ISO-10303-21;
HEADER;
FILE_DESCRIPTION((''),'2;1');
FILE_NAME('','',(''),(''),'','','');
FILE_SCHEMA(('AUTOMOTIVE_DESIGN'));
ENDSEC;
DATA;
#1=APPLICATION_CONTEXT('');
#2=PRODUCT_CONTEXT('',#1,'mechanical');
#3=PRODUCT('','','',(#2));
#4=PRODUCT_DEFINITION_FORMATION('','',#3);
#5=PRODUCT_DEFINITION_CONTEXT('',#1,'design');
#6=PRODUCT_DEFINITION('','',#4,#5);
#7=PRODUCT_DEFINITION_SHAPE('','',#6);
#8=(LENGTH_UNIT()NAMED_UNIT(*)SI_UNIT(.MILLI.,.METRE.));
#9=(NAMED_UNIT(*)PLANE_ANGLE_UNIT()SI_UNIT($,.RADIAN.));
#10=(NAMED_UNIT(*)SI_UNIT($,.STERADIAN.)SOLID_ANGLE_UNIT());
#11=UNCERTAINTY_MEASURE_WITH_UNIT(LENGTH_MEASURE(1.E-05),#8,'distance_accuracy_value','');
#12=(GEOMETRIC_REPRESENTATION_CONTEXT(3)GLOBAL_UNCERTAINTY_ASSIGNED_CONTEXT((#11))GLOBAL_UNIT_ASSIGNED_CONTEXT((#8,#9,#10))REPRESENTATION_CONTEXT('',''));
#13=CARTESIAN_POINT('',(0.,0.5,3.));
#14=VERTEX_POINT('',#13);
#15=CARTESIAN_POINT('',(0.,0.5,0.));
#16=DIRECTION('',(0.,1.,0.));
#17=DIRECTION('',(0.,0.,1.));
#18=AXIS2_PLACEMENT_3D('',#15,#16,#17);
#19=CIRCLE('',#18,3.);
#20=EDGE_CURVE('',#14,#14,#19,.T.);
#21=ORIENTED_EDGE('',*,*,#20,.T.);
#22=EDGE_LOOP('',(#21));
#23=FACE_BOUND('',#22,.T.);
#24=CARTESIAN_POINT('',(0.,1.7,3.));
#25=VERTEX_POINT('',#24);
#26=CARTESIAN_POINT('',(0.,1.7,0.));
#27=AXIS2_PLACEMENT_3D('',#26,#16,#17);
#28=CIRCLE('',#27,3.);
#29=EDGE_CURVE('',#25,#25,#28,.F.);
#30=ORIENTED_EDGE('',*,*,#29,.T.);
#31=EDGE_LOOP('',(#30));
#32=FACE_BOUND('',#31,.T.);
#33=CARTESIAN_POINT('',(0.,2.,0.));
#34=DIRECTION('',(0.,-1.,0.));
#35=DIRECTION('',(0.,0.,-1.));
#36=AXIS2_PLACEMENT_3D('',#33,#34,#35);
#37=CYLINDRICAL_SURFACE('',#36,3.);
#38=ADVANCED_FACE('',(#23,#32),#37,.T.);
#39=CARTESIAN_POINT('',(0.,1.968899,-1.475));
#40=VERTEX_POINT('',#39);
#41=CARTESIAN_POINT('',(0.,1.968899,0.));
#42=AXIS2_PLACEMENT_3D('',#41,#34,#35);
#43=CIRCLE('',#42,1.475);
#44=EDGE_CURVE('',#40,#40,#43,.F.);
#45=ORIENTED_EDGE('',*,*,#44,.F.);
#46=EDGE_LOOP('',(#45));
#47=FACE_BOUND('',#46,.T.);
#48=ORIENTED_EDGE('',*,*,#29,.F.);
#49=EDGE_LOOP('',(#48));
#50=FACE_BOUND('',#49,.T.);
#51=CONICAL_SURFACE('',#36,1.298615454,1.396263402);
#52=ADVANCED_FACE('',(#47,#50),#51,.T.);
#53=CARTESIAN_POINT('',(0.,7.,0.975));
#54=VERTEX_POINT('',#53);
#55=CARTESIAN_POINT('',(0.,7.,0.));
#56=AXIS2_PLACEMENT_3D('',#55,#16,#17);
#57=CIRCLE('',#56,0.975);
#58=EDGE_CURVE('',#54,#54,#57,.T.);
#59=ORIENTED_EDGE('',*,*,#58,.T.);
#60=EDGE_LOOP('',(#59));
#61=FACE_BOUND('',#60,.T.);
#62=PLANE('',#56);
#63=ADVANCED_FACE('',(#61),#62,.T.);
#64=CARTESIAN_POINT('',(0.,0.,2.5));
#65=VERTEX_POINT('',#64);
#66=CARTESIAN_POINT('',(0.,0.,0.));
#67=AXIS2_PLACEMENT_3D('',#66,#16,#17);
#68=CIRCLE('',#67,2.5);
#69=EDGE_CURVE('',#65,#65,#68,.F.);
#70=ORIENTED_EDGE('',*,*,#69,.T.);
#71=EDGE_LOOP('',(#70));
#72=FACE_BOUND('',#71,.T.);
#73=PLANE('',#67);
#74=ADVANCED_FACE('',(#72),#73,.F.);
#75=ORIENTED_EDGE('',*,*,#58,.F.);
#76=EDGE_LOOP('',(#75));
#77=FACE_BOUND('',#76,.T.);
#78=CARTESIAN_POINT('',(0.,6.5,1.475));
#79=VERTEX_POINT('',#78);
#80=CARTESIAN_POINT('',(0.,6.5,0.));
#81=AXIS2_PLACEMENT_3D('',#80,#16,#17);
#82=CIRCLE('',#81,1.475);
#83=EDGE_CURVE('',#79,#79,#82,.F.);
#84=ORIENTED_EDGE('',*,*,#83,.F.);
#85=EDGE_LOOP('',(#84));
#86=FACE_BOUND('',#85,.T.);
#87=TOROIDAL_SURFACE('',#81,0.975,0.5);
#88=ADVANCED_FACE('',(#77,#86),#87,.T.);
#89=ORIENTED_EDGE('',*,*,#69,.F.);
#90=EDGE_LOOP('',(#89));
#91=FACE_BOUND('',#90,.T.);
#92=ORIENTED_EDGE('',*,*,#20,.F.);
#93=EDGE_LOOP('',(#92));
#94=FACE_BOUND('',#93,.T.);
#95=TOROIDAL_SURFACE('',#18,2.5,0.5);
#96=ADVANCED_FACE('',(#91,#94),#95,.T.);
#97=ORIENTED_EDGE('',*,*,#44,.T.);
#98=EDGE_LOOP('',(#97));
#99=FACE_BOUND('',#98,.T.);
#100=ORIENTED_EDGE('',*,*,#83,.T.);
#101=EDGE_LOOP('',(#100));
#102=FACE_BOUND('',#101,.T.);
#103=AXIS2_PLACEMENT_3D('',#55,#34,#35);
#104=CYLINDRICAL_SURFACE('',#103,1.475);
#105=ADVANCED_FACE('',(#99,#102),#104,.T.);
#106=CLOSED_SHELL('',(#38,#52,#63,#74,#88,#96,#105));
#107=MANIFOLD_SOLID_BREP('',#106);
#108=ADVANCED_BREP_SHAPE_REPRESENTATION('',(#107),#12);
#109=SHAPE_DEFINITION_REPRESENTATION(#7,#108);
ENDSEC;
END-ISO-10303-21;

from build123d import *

# Parameters (mm, degrees)
CROQUIS1_R              = 3
SALIENTE_EXTRUIR1_DEPTH = 2
CROQUIS2_R              = 1.475
SALIENTE_EXTRUIR2_DEPTH = 5
CHAFL_N1_SIZE           = 0.3
CHAFL_N1_SIZE_2         = 1.701384546
REDONDEO1_R             = 0.5
REDONDEO2_R             = 0.5


with BuildPart() as part:
    # Croquis1 → Saliente-Extruir1 (new body)
    with BuildSketch(Plane(origin=(0, 0, 0), x_dir=(1, 0, 0), z_dir=(0, 1, 0))):
        with Locations(Location((0, 0, 0), (0, 0, 270))):
            Circle(CROQUIS1_R)
    extrude(amount=SALIENTE_EXTRUIR1_DEPTH)

    # Croquis2 → Saliente-Extruir2 (add)
    with BuildSketch(Plane(origin=(0, 2, 0), x_dir=(1, 0, 0), z_dir=(0, 1, 0))):
        with Locations(Location((0, 0, 0), (0, 0, 270))):
            Circle(CROQUIS2_R)
    extrude(amount=SALIENTE_EXTRUIR2_DEPTH)

    # Chaflán1
    # the kernel refuses this chamfer: 1.701384546, 0.3 mm, written as the material it takes off along each edge
    with BuildSketch(Plane(origin=(0, 2, 0), x_dir=(0, 0, 1), z_dir=(-1, 0, 0))) as chafl_n1_piece_1_section:
        Polygon((3, -CHAFL_N1_SIZE), (3 - CHAFL_N1_SIZE_2, 0), (3, 0), align=None)
    chafl_n1_piece_1 = revolve(axis=Axis((0, 2, 0), (0, 1, 0)), mode=Mode.PRIVATE)
    chafl_n1_piece_1 = chafl_n1_piece_1 - Plane(origin=(0, 1.84524898, 0), x_dir=(0, 0, 1), z_dir=(0, -1, 0)) * Cylinder(1.475, 12, mode=Mode.PRIVATE)
    add(chafl_n1_piece_1, mode=Mode.SUBTRACT)

    # Redondeo1
    redondeo1_edges = [part.edges().sort_by_distance(p)[0] for p in [
        (0, 7, -1.475),
    ]]
    fillet(redondeo1_edges, radius=REDONDEO1_R)

    # Redondeo2
    redondeo2_edges = [part.edges().sort_by_distance(p)[0] for p in [
        (0, 0, -3),
    ]]
    fillet(redondeo2_edges, radius=REDONDEO2_R)


solid = part.part
